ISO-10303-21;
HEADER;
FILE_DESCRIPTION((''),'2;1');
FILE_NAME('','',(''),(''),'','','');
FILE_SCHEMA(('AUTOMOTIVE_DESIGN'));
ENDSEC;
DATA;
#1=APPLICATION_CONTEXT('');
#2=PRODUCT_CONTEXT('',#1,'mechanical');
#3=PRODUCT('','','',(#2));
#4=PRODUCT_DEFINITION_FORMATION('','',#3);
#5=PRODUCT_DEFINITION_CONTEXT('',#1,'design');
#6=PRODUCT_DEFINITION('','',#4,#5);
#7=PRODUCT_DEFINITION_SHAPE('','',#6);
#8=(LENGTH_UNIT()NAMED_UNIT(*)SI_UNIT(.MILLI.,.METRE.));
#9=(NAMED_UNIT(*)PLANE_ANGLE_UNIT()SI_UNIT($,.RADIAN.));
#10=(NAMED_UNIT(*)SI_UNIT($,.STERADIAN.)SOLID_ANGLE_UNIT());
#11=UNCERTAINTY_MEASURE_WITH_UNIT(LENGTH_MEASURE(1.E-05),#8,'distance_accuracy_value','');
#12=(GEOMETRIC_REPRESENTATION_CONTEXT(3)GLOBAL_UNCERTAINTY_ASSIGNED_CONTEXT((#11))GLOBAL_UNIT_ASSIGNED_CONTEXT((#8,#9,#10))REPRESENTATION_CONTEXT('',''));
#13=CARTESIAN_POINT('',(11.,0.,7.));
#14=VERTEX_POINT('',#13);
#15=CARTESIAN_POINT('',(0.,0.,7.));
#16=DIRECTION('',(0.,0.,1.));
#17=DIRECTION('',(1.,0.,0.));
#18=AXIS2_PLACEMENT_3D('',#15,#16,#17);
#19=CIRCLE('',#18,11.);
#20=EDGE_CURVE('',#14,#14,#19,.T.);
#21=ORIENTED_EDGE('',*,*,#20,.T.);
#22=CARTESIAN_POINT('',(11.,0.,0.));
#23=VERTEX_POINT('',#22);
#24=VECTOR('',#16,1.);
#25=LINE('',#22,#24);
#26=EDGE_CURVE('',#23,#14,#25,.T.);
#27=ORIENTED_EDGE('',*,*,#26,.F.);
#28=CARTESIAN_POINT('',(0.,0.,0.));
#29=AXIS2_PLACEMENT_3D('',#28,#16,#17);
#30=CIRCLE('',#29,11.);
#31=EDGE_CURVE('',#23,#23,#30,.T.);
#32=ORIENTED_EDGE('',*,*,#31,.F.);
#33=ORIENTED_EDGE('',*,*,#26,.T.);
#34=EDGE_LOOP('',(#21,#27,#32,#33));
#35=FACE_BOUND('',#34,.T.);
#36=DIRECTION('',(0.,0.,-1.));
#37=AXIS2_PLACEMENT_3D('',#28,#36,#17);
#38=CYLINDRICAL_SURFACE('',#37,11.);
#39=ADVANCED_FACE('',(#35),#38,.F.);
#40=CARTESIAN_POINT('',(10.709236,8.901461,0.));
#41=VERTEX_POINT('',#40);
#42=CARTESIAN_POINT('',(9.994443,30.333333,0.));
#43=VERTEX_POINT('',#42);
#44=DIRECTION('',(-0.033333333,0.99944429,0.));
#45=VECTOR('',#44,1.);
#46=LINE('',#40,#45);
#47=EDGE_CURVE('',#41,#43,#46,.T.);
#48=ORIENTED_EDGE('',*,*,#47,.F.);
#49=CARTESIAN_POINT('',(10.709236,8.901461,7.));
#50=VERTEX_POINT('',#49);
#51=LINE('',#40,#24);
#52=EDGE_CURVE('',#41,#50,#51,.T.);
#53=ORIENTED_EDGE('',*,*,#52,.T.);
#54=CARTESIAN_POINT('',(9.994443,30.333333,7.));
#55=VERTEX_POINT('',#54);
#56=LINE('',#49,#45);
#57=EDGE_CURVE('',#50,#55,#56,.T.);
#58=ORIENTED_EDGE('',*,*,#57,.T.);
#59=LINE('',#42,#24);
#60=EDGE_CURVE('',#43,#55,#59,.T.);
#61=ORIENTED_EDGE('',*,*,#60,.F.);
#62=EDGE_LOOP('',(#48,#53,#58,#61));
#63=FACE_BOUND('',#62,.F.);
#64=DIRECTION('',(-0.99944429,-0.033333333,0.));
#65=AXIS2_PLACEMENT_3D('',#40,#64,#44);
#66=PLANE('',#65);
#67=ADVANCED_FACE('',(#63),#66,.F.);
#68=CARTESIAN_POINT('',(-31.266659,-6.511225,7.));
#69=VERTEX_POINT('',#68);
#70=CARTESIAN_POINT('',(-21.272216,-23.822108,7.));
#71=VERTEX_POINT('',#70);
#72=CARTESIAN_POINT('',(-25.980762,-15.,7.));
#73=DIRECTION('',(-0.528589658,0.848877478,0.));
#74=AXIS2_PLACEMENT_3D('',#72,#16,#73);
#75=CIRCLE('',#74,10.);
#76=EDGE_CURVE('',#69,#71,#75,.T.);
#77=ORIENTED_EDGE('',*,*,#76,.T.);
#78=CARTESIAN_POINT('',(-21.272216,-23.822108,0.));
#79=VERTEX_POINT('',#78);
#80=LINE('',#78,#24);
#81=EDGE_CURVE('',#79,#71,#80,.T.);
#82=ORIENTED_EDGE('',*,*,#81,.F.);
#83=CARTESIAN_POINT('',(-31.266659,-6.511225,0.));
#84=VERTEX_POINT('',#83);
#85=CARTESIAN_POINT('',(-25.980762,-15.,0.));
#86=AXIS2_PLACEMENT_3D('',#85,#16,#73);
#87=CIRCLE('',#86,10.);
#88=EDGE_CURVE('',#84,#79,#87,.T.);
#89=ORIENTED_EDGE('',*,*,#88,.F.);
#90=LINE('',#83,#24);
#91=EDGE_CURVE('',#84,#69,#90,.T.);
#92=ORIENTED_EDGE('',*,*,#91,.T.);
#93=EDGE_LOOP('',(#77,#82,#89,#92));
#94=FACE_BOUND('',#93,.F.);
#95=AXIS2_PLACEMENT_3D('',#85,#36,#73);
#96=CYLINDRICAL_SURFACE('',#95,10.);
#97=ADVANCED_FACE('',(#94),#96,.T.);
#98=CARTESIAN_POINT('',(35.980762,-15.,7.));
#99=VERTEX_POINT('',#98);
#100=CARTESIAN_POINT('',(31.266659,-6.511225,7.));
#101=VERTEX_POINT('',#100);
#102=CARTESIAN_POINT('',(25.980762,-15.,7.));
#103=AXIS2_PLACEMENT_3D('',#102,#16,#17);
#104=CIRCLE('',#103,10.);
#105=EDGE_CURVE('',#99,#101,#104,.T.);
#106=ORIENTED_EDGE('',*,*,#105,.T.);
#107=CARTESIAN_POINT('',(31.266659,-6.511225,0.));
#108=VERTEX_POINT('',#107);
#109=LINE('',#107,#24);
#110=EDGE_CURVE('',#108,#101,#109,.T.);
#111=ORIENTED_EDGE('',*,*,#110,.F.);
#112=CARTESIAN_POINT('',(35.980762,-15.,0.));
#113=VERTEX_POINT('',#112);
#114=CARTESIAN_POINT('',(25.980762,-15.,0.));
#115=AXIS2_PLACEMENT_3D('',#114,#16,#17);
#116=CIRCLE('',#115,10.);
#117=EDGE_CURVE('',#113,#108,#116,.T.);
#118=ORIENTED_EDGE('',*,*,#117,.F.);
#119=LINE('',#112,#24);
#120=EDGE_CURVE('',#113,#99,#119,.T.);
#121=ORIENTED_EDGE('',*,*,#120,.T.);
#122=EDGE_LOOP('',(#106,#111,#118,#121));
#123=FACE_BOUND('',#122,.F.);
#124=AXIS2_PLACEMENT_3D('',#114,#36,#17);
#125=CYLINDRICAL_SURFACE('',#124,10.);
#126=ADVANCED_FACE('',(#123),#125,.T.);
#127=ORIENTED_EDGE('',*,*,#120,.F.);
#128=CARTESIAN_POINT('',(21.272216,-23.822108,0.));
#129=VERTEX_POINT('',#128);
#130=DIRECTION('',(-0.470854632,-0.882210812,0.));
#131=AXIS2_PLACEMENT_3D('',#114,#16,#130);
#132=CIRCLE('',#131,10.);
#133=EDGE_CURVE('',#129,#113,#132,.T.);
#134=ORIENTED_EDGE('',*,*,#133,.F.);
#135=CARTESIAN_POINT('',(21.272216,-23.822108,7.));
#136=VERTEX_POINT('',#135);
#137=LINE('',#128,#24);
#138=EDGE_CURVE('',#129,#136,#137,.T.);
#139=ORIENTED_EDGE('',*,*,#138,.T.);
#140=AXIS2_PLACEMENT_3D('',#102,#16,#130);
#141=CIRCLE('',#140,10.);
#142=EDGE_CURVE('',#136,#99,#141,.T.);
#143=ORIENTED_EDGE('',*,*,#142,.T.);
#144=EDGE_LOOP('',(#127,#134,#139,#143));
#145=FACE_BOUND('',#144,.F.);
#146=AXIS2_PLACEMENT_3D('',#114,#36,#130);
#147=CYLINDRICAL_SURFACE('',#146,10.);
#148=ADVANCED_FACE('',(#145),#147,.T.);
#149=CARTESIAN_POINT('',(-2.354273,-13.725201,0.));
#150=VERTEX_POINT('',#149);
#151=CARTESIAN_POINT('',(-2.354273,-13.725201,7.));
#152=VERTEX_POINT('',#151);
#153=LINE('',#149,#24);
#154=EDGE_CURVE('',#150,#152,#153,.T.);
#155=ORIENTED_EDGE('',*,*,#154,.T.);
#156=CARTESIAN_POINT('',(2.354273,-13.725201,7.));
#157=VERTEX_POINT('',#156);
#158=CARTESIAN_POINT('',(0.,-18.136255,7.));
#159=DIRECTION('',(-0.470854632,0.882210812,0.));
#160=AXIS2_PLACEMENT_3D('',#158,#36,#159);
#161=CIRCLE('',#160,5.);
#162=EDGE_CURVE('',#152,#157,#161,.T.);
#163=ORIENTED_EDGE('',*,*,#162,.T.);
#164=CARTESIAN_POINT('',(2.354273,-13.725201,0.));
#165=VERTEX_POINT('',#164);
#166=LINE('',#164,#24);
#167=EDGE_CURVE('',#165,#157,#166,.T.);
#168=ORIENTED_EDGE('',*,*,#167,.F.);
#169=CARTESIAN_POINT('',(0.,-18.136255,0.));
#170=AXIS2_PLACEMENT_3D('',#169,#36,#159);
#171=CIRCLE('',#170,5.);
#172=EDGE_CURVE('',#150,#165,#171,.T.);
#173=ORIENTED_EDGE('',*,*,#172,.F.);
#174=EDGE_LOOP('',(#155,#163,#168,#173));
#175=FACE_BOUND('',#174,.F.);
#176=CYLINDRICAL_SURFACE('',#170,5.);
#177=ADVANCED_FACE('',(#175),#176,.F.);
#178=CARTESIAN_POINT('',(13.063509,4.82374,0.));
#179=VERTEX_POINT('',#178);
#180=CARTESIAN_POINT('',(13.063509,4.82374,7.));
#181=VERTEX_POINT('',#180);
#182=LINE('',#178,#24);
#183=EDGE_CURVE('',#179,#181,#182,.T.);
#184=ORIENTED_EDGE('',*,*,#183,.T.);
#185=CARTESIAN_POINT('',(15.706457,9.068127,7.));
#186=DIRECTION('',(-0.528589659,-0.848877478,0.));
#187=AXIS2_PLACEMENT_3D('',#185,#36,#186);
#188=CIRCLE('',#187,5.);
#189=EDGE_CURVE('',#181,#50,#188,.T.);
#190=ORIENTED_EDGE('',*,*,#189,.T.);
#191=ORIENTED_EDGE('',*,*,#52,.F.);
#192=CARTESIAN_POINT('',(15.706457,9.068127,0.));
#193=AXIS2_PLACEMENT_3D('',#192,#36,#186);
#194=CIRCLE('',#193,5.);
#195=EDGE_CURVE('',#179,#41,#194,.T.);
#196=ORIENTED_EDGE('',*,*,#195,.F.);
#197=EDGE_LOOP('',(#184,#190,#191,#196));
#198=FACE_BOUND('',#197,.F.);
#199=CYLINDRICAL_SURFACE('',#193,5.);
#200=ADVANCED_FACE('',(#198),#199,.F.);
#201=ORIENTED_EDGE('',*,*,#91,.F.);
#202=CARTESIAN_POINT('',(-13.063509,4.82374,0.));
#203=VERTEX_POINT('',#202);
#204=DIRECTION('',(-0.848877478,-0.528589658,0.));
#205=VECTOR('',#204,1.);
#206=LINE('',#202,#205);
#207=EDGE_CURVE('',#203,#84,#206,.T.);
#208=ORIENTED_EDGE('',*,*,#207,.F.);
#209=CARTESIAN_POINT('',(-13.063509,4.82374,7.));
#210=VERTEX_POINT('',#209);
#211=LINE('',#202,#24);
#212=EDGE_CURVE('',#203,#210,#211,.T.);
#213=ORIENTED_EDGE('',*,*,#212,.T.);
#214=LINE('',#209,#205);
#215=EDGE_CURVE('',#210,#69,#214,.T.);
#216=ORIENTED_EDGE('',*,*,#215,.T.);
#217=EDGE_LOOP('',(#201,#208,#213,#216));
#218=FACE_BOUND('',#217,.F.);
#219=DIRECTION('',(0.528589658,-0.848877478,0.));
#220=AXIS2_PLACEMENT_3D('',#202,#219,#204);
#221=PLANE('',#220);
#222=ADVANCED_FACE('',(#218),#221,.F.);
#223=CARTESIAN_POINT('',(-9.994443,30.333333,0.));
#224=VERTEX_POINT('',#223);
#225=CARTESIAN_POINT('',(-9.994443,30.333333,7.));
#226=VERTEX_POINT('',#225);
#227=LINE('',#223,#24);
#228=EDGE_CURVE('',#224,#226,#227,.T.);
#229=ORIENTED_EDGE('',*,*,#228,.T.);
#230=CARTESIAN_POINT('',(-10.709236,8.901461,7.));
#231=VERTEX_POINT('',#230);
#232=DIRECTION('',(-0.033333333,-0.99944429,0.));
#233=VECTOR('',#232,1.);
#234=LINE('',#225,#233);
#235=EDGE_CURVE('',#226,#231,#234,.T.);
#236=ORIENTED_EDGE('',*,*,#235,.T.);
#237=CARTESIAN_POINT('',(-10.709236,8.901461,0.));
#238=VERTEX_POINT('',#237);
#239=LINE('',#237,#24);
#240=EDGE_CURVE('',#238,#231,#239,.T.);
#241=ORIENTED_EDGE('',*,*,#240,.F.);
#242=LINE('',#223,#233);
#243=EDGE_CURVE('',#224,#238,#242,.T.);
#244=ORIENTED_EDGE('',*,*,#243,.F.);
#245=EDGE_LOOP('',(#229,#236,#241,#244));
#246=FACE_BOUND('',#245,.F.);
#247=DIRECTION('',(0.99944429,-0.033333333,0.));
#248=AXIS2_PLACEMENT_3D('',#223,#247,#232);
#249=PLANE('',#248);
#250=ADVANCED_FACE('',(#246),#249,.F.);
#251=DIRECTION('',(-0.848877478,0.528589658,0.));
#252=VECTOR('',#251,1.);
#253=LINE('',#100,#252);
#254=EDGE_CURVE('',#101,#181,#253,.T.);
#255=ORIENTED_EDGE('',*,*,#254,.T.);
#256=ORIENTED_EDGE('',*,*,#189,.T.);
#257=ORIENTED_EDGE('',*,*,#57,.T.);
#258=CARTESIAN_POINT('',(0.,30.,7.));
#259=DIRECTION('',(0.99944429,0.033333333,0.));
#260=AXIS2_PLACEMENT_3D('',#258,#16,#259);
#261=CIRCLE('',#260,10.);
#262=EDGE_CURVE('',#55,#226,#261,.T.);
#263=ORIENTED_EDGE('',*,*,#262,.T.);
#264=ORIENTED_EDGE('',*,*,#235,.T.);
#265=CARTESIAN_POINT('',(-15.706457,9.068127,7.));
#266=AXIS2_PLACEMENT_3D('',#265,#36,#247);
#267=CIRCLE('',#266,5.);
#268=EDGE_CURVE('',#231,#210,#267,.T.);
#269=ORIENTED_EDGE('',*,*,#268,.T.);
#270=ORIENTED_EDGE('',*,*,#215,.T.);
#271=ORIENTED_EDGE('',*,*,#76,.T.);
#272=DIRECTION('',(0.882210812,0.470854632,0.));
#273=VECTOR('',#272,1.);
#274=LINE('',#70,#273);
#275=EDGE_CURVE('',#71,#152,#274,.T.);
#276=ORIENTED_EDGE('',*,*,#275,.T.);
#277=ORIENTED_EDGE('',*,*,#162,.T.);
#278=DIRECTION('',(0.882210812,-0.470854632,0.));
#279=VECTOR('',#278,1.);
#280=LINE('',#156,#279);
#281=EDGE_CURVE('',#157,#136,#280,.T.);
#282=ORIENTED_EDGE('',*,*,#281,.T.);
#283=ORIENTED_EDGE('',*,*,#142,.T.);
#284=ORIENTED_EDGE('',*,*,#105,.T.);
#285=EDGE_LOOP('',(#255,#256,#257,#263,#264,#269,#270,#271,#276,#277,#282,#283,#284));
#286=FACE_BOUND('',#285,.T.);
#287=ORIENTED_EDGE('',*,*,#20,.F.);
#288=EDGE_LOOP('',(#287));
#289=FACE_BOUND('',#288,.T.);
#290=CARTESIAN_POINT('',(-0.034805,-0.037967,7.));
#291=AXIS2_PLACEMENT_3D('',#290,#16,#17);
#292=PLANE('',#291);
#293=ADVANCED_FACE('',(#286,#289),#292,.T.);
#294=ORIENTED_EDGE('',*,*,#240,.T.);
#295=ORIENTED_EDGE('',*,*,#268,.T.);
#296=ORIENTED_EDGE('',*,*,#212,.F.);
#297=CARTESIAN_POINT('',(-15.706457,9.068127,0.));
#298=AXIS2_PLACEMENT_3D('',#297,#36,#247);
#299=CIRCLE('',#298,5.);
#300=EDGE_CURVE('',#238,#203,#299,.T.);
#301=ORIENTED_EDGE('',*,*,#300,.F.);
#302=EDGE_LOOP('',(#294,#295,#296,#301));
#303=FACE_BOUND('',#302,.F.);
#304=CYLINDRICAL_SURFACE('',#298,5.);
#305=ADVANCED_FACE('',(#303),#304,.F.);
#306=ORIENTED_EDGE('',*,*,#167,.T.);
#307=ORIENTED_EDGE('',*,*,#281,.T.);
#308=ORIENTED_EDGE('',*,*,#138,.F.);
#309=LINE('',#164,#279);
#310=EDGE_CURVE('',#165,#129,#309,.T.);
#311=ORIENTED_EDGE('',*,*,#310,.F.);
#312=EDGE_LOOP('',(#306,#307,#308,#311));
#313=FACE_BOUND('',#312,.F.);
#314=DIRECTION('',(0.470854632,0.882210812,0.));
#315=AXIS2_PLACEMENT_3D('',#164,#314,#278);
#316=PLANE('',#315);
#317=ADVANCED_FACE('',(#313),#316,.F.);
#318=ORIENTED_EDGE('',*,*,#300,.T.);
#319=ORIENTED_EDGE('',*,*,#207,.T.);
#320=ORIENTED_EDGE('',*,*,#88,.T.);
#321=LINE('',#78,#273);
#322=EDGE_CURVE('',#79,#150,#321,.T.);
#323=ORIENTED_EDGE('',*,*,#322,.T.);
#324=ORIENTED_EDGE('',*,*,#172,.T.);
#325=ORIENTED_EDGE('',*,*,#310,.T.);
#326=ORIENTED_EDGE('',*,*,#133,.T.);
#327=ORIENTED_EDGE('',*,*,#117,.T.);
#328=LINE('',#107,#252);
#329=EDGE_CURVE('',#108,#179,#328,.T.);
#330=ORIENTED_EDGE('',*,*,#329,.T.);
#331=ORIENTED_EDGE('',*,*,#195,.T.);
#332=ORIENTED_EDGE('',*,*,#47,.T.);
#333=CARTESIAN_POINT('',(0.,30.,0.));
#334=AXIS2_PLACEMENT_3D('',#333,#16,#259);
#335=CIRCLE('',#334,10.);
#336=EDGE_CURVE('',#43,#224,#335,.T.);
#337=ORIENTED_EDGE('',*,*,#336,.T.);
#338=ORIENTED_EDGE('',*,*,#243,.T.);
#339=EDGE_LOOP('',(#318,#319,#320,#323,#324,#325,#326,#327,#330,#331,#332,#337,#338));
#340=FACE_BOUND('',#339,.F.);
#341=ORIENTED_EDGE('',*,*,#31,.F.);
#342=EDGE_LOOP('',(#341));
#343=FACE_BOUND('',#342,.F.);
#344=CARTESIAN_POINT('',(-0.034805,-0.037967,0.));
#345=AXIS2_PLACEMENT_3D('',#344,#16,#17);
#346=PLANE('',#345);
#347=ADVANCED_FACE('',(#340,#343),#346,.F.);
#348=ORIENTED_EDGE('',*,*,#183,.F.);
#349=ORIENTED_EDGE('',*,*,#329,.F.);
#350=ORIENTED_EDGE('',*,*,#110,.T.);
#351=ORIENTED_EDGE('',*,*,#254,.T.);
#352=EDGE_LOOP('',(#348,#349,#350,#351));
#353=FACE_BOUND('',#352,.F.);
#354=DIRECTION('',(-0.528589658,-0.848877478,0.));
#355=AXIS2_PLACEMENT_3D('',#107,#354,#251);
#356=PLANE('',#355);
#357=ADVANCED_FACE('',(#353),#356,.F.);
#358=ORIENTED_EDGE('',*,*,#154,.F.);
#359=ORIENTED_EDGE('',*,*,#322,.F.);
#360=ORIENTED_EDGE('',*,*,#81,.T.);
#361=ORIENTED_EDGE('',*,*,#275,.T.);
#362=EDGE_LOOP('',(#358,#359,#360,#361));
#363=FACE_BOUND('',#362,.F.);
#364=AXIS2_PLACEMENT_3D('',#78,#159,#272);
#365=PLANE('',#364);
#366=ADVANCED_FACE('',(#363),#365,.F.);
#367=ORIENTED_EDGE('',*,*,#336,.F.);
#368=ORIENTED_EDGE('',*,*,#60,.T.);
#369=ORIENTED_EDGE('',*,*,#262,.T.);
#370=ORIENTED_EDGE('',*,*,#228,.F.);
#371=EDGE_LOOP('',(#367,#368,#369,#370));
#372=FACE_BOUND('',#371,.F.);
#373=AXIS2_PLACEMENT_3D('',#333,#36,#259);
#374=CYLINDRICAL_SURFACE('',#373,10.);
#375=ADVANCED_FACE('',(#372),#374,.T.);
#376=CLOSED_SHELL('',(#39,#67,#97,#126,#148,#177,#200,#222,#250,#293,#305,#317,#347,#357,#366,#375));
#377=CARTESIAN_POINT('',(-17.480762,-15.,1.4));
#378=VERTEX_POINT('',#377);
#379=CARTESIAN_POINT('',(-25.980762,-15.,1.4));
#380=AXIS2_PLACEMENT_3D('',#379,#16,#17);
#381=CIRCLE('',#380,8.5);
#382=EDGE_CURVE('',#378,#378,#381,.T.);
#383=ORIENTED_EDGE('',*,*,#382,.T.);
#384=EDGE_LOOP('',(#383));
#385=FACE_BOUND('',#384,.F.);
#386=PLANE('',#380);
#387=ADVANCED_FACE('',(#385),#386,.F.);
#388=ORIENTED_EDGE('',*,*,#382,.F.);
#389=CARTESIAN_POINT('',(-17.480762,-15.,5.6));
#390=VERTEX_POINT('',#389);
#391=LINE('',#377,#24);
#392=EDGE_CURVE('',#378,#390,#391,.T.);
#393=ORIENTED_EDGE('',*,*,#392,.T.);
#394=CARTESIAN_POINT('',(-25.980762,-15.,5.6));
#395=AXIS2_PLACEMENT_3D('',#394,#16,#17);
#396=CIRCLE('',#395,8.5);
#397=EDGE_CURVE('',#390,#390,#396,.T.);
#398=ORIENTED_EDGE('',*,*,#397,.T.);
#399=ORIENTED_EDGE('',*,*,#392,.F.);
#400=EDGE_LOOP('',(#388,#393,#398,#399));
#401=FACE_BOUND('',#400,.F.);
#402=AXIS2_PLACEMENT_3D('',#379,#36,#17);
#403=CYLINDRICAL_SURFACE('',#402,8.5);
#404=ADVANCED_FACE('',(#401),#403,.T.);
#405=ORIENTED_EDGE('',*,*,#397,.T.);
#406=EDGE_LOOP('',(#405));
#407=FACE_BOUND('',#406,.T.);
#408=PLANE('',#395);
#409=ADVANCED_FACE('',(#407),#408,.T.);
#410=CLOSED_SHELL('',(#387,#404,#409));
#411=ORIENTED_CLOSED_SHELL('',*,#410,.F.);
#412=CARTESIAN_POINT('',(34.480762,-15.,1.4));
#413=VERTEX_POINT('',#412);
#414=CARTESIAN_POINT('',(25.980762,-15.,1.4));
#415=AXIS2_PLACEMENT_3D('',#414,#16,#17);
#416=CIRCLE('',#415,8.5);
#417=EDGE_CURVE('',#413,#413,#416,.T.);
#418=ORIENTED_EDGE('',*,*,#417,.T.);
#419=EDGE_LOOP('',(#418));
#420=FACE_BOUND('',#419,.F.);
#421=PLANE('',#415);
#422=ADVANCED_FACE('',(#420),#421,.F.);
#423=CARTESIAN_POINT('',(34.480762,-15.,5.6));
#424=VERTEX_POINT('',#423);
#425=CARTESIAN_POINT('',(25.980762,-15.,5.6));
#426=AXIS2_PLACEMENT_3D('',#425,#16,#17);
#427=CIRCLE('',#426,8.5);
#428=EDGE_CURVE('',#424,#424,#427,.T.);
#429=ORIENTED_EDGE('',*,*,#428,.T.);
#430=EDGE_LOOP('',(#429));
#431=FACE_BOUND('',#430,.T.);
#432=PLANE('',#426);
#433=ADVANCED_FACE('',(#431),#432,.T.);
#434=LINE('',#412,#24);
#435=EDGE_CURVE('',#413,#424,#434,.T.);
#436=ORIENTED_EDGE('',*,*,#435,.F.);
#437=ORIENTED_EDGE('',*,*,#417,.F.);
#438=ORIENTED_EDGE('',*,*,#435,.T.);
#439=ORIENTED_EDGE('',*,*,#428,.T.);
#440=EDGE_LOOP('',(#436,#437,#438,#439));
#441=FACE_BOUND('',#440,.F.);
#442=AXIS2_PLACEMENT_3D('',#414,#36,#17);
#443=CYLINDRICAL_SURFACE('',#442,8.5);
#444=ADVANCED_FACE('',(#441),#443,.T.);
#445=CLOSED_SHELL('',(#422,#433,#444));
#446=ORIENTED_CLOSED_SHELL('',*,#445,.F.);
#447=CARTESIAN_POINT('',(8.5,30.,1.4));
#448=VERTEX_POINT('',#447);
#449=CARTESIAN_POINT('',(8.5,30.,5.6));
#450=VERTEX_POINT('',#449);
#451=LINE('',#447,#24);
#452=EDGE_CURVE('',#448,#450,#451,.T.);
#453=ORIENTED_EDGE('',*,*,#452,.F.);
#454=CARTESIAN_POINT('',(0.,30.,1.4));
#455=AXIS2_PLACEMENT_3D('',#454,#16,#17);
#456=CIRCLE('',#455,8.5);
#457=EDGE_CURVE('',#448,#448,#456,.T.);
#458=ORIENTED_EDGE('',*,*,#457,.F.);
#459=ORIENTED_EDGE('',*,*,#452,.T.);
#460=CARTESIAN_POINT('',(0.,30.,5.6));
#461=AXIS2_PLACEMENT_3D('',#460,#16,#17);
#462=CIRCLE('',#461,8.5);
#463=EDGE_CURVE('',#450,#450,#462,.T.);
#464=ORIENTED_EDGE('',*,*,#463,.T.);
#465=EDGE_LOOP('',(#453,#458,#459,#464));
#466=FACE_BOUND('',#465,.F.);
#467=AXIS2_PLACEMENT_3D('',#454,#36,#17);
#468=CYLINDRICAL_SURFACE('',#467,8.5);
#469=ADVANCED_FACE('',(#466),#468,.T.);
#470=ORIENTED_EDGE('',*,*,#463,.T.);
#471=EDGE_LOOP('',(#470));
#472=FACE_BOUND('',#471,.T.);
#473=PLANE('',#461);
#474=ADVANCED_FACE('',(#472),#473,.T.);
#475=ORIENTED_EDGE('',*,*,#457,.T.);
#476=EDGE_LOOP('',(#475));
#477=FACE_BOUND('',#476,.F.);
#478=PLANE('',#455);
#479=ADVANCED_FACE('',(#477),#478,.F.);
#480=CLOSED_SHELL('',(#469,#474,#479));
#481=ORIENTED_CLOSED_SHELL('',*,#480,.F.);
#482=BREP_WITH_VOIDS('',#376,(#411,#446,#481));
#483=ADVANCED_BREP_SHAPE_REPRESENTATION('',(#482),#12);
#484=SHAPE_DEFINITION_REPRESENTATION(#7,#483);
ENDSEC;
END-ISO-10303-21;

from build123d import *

# Parameters (mm, degrees)
F0_R     = 11
F1_DEPTH = 7
F3_R     = 8.5
F4_DEPTH = 4.2


# Not quite as in the source:
# - a feature names something its author has since deleted; it is built from what else it names


with BuildPart() as f1:
    # F0 (on Top) → F1 (new body)
    with BuildSketch(Plane.XY):
        with BuildLine():
            ThreePointArc((9.9944429004, 30.3333333333), (9.9986106286, 30.1666898261), (10, 30))
            ThreePointArc((10, 30), (-0.1666898261, 20.0013893714), (-9.9944429004, 30.3333333333))
            Line((-9.9944429004, 30.3333333333), (-10.7092358725, 8.9014606966))
            ThreePointArc((-10.7092358725, 8.9014606966), (-11.3763303038, 6.5681273633), (-13.0635090303, 4.8237399724))
            Line((-13.0635090303, 4.8237399724), (-31.2666586983, -6.5112252183))
            ThreePointArc((-31.2666586983, -6.5112252183), (-21.1258144232, -6.2576042801), (-15.9807621135, -15))
            ThreePointArc((-15.9807621135, -15), (-17.4050562197, -20.1436629382), (-21.2722157979, -23.8221081151))
            Line((-21.2722157979, -23.8221081151), (-2.3542731578, -13.725200669))
            ThreePointArc((-2.3542731578, -13.725200669), (0, -13.1362547266), (2.3542731578, -13.725200669))
            Line((2.3542731578, -13.725200669), (21.2722157979, -23.8221081151))
            ThreePointArc((21.2722157979, -23.8221081151), (17.3205080757, -10), (31.2666586983, -6.5112252183))
            Line((31.2666586983, -6.5112252183), (13.0635090303, 4.8237399724))
            ThreePointArc((13.0635090303, 4.8237399724), (11.3763303038, 6.5681273633), (10.7092358725, 8.9014606966))
            Line((10.7092358725, 8.9014606966), (9.9944429004, 30.3333333333))
        make_face()
        Circle(F0_R, mode=Mode.SUBTRACT)
        with BuildLine():
            ThreePointArc((-9.9944429004, 30.3333333333), (-0.1666898261, 20.0013893714), (10, 30))
            ThreePointArc((10, 30), (9.9986106286, 30.1666898261), (9.9944429004, 30.3333333333))
            ThreePointArc((9.9944429004, 30.3333333333), (0, 40), (-9.9944429004, 30.3333333333))
        make_face()
        with BuildLine():
            ThreePointArc((-15.9807621135, -15), (-21.1258144232, -6.2576042801), (-31.2666586983, -6.5112252183))
            ThreePointArc((-31.2666586983, -6.5112252183), (-34.6410161514, -20), (-21.2722157979, -23.8221081151))
            ThreePointArc((-21.2722157979, -23.8221081151), (-17.4050562197, -20.1436629382), (-15.9807621135, -15))
        make_face()
        with BuildLine():
            ThreePointArc((35.9807621135, -15), (34.7231578335, -10.1450523096), (31.2666586983, -6.5112252183))
            ThreePointArc((31.2666586983, -6.5112252183), (17.3205080757, -10), (21.2722157979, -23.8221081151))
            ThreePointArc((21.2722157979, -23.8221081151), (31.1244250518, -23.5757058939), (35.9807621135, -15))
        make_face()
    extrude(amount=F1_DEPTH)

    # F3 (on offset) → F4 (cut)
    with BuildSketch(Plane.XY.offset(1.4)):
        with Locations((25.9807621135, -15)):
            Circle(F3_R)
        with Locations((-25.9807621135, -15)):
            Circle(F3_R)
        with Locations((0, 30)):
            Circle(F3_R)
    extrude(amount=F4_DEPTH, mode=Mode.SUBTRACT)


solid = f1.part
